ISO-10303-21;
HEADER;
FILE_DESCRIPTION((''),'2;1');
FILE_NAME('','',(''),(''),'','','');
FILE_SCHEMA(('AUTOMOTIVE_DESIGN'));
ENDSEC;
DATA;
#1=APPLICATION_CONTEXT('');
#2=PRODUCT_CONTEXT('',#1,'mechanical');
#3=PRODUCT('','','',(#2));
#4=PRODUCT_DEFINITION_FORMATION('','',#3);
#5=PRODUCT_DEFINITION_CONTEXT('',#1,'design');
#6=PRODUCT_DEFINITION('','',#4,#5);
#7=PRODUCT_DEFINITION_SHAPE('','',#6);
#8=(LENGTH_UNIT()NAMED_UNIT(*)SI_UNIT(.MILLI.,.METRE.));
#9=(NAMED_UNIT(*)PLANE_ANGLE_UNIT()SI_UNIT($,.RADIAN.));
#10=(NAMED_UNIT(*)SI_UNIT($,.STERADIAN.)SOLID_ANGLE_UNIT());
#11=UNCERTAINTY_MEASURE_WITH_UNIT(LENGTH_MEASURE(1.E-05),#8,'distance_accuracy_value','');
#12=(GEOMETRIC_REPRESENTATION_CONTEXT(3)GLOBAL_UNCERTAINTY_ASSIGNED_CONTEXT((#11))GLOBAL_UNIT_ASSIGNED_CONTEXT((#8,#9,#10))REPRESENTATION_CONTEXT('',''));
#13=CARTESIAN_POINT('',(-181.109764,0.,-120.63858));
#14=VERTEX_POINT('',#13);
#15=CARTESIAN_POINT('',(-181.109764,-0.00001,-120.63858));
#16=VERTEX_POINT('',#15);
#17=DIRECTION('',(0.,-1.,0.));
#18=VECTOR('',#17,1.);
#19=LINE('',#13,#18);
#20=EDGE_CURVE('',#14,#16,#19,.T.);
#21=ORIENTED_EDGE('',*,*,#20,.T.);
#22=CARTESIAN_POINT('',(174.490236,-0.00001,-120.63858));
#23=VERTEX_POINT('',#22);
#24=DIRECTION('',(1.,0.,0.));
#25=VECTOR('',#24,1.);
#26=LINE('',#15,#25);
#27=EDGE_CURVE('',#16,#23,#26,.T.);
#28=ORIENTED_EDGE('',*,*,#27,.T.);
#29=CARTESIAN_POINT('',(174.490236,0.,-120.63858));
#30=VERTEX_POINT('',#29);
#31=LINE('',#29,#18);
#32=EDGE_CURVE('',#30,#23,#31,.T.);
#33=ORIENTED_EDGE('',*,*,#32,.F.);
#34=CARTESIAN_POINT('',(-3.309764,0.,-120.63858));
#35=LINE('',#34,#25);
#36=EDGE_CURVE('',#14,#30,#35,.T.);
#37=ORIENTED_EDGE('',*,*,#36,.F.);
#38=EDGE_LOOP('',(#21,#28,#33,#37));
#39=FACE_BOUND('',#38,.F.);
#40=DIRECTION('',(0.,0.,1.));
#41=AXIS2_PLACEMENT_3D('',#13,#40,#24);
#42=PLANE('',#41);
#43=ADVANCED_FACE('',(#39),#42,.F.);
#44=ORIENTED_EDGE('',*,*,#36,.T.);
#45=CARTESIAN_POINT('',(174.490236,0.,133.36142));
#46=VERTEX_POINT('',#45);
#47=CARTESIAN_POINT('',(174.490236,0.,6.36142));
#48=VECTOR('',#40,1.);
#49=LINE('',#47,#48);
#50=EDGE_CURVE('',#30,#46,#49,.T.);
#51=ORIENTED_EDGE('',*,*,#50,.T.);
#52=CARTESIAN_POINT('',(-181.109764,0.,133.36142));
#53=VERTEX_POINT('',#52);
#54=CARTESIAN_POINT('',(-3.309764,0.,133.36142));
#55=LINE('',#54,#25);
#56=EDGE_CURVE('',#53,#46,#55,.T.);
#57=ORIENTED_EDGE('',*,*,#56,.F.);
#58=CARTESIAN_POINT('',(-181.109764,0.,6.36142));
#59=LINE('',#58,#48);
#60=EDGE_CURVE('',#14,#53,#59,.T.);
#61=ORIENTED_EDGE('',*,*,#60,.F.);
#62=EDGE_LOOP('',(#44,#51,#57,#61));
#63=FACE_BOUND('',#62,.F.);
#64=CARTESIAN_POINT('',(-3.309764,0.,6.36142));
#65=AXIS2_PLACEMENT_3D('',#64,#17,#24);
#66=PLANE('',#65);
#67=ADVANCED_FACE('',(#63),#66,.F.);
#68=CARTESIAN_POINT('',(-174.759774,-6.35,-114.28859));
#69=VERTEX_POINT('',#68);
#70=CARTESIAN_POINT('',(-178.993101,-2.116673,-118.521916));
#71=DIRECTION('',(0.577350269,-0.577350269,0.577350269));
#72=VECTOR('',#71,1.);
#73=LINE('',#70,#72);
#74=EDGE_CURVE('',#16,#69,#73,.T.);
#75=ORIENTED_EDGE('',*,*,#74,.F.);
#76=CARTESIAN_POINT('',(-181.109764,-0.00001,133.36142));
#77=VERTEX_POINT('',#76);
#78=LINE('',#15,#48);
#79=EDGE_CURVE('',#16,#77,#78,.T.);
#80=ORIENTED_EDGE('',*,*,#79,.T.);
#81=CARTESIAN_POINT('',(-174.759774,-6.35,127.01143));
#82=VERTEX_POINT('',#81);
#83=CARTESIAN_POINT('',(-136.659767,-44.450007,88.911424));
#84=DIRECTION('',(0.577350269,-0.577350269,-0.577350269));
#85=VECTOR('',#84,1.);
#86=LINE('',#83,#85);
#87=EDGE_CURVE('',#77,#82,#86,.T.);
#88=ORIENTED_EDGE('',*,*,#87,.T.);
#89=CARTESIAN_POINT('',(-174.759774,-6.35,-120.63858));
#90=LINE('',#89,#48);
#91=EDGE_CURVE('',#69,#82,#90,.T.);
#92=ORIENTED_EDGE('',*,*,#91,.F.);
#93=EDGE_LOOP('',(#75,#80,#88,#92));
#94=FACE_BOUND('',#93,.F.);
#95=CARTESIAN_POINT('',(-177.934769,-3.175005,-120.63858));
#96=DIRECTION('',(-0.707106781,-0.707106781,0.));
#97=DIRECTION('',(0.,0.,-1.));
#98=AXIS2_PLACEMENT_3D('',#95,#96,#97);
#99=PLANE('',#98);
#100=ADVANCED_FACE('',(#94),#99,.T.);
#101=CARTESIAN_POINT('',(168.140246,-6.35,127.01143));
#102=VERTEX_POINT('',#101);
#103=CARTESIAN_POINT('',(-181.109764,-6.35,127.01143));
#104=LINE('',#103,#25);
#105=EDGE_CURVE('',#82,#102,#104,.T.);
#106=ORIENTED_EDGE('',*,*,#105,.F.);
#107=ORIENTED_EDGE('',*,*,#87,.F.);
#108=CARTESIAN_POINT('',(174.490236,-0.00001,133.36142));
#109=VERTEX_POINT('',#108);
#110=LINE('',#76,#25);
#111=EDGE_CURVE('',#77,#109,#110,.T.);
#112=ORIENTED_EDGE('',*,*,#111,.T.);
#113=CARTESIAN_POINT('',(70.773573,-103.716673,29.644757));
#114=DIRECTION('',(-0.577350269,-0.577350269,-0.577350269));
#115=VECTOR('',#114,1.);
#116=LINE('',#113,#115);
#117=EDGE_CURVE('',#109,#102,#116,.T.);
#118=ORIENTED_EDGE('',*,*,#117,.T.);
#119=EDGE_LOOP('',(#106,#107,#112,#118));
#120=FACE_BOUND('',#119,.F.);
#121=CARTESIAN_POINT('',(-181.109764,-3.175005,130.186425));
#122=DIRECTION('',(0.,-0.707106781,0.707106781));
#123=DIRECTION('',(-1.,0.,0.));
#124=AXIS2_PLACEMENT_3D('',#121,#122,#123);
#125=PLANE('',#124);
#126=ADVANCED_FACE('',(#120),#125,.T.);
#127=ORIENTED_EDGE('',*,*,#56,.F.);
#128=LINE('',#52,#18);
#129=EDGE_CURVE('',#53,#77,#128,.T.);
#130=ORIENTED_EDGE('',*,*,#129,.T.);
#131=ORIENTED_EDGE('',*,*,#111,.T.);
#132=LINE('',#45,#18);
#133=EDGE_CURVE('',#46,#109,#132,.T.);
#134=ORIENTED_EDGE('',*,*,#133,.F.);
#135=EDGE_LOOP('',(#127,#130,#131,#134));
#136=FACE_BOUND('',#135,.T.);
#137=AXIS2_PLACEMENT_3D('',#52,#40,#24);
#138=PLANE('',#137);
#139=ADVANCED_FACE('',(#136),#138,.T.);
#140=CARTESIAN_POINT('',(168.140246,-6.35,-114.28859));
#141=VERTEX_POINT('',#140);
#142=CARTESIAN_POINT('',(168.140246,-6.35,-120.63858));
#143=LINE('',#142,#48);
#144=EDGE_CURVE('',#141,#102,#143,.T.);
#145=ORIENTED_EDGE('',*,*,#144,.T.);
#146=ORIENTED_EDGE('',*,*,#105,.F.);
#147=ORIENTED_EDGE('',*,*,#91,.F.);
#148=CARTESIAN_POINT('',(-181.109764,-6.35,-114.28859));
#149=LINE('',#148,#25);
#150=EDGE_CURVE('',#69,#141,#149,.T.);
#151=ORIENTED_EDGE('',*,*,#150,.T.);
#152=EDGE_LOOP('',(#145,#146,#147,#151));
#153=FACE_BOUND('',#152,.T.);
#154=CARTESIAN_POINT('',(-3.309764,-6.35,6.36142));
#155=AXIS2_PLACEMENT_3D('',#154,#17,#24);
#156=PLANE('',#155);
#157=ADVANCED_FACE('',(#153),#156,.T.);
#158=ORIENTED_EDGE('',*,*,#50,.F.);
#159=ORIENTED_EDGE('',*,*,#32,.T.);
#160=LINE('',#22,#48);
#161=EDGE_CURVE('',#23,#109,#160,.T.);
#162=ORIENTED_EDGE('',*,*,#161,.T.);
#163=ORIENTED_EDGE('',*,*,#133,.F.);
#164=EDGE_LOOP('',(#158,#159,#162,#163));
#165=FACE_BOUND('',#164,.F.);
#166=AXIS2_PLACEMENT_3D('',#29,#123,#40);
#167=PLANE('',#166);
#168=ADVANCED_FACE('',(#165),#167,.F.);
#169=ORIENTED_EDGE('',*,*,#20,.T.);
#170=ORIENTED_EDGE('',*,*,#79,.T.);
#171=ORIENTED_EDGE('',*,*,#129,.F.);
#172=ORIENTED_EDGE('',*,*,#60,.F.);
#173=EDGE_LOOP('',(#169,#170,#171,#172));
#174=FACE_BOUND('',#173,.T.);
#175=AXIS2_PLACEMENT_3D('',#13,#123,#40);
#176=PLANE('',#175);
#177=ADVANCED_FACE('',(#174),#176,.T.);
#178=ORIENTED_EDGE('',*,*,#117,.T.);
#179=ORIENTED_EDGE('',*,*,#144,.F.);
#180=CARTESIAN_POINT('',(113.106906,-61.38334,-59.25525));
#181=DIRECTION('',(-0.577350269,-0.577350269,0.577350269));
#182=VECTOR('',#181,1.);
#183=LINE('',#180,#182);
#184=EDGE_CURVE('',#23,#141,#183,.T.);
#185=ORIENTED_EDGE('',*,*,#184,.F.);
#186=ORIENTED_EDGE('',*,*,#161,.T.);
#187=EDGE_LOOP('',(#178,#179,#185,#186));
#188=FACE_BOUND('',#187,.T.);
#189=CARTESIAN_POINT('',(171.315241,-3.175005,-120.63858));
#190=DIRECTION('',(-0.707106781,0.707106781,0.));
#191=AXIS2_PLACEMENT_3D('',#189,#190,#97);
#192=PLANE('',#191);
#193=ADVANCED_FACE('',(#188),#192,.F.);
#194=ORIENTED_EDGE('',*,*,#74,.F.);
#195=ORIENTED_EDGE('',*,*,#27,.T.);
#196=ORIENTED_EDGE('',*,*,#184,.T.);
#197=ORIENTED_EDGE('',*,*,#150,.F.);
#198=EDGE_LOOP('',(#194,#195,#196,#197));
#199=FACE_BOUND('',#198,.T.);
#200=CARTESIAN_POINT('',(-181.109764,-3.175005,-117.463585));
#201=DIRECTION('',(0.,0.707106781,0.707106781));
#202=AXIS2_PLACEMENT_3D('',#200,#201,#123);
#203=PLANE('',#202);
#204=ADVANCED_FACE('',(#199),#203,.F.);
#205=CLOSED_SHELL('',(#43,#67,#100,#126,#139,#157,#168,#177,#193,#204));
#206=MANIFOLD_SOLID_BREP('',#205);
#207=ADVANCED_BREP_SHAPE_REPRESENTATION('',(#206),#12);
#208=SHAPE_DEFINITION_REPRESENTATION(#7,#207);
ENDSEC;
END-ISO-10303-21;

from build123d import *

# Parameters (mm, degrees)
F0_W     = 355.6
F0_H     = 254
F1_DEPTH = 6.35
F2_SIZE2 = 6.34999
F2_SIZE  = 6.34999


# Not quite as in the source:
# - a fillet or chamfer is up to 0.001 mm smaller than in the source, because OpenCascade refuses the exact size


with BuildPart() as f1:
    # F0 (on Front) → F1 (new body)
    with BuildSketch(Plane.XZ):
        with Locations((-3.309763968, 6.3614202906)):
            Rectangle(F0_W, F0_H)
    extrude(amount=F1_DEPTH)

    # F2 (size 6.35 and 6.35 in the source; OpenCascade refuses exactly that, so slightly less here)
    f2_edges = [f1.edges().sort_by_distance(p)[0] for p in [
        (-3.309764, -6.35, 133.36142),
        (-181.109764, -6.35, 6.36142),
        (-3.309764, -6.35, -120.63858),
        (174.490236, -6.35, 6.36142),
    ]]
    chamfer(f2_edges, length=F2_SIZE, length2=F2_SIZE2)


solid = f1.part
